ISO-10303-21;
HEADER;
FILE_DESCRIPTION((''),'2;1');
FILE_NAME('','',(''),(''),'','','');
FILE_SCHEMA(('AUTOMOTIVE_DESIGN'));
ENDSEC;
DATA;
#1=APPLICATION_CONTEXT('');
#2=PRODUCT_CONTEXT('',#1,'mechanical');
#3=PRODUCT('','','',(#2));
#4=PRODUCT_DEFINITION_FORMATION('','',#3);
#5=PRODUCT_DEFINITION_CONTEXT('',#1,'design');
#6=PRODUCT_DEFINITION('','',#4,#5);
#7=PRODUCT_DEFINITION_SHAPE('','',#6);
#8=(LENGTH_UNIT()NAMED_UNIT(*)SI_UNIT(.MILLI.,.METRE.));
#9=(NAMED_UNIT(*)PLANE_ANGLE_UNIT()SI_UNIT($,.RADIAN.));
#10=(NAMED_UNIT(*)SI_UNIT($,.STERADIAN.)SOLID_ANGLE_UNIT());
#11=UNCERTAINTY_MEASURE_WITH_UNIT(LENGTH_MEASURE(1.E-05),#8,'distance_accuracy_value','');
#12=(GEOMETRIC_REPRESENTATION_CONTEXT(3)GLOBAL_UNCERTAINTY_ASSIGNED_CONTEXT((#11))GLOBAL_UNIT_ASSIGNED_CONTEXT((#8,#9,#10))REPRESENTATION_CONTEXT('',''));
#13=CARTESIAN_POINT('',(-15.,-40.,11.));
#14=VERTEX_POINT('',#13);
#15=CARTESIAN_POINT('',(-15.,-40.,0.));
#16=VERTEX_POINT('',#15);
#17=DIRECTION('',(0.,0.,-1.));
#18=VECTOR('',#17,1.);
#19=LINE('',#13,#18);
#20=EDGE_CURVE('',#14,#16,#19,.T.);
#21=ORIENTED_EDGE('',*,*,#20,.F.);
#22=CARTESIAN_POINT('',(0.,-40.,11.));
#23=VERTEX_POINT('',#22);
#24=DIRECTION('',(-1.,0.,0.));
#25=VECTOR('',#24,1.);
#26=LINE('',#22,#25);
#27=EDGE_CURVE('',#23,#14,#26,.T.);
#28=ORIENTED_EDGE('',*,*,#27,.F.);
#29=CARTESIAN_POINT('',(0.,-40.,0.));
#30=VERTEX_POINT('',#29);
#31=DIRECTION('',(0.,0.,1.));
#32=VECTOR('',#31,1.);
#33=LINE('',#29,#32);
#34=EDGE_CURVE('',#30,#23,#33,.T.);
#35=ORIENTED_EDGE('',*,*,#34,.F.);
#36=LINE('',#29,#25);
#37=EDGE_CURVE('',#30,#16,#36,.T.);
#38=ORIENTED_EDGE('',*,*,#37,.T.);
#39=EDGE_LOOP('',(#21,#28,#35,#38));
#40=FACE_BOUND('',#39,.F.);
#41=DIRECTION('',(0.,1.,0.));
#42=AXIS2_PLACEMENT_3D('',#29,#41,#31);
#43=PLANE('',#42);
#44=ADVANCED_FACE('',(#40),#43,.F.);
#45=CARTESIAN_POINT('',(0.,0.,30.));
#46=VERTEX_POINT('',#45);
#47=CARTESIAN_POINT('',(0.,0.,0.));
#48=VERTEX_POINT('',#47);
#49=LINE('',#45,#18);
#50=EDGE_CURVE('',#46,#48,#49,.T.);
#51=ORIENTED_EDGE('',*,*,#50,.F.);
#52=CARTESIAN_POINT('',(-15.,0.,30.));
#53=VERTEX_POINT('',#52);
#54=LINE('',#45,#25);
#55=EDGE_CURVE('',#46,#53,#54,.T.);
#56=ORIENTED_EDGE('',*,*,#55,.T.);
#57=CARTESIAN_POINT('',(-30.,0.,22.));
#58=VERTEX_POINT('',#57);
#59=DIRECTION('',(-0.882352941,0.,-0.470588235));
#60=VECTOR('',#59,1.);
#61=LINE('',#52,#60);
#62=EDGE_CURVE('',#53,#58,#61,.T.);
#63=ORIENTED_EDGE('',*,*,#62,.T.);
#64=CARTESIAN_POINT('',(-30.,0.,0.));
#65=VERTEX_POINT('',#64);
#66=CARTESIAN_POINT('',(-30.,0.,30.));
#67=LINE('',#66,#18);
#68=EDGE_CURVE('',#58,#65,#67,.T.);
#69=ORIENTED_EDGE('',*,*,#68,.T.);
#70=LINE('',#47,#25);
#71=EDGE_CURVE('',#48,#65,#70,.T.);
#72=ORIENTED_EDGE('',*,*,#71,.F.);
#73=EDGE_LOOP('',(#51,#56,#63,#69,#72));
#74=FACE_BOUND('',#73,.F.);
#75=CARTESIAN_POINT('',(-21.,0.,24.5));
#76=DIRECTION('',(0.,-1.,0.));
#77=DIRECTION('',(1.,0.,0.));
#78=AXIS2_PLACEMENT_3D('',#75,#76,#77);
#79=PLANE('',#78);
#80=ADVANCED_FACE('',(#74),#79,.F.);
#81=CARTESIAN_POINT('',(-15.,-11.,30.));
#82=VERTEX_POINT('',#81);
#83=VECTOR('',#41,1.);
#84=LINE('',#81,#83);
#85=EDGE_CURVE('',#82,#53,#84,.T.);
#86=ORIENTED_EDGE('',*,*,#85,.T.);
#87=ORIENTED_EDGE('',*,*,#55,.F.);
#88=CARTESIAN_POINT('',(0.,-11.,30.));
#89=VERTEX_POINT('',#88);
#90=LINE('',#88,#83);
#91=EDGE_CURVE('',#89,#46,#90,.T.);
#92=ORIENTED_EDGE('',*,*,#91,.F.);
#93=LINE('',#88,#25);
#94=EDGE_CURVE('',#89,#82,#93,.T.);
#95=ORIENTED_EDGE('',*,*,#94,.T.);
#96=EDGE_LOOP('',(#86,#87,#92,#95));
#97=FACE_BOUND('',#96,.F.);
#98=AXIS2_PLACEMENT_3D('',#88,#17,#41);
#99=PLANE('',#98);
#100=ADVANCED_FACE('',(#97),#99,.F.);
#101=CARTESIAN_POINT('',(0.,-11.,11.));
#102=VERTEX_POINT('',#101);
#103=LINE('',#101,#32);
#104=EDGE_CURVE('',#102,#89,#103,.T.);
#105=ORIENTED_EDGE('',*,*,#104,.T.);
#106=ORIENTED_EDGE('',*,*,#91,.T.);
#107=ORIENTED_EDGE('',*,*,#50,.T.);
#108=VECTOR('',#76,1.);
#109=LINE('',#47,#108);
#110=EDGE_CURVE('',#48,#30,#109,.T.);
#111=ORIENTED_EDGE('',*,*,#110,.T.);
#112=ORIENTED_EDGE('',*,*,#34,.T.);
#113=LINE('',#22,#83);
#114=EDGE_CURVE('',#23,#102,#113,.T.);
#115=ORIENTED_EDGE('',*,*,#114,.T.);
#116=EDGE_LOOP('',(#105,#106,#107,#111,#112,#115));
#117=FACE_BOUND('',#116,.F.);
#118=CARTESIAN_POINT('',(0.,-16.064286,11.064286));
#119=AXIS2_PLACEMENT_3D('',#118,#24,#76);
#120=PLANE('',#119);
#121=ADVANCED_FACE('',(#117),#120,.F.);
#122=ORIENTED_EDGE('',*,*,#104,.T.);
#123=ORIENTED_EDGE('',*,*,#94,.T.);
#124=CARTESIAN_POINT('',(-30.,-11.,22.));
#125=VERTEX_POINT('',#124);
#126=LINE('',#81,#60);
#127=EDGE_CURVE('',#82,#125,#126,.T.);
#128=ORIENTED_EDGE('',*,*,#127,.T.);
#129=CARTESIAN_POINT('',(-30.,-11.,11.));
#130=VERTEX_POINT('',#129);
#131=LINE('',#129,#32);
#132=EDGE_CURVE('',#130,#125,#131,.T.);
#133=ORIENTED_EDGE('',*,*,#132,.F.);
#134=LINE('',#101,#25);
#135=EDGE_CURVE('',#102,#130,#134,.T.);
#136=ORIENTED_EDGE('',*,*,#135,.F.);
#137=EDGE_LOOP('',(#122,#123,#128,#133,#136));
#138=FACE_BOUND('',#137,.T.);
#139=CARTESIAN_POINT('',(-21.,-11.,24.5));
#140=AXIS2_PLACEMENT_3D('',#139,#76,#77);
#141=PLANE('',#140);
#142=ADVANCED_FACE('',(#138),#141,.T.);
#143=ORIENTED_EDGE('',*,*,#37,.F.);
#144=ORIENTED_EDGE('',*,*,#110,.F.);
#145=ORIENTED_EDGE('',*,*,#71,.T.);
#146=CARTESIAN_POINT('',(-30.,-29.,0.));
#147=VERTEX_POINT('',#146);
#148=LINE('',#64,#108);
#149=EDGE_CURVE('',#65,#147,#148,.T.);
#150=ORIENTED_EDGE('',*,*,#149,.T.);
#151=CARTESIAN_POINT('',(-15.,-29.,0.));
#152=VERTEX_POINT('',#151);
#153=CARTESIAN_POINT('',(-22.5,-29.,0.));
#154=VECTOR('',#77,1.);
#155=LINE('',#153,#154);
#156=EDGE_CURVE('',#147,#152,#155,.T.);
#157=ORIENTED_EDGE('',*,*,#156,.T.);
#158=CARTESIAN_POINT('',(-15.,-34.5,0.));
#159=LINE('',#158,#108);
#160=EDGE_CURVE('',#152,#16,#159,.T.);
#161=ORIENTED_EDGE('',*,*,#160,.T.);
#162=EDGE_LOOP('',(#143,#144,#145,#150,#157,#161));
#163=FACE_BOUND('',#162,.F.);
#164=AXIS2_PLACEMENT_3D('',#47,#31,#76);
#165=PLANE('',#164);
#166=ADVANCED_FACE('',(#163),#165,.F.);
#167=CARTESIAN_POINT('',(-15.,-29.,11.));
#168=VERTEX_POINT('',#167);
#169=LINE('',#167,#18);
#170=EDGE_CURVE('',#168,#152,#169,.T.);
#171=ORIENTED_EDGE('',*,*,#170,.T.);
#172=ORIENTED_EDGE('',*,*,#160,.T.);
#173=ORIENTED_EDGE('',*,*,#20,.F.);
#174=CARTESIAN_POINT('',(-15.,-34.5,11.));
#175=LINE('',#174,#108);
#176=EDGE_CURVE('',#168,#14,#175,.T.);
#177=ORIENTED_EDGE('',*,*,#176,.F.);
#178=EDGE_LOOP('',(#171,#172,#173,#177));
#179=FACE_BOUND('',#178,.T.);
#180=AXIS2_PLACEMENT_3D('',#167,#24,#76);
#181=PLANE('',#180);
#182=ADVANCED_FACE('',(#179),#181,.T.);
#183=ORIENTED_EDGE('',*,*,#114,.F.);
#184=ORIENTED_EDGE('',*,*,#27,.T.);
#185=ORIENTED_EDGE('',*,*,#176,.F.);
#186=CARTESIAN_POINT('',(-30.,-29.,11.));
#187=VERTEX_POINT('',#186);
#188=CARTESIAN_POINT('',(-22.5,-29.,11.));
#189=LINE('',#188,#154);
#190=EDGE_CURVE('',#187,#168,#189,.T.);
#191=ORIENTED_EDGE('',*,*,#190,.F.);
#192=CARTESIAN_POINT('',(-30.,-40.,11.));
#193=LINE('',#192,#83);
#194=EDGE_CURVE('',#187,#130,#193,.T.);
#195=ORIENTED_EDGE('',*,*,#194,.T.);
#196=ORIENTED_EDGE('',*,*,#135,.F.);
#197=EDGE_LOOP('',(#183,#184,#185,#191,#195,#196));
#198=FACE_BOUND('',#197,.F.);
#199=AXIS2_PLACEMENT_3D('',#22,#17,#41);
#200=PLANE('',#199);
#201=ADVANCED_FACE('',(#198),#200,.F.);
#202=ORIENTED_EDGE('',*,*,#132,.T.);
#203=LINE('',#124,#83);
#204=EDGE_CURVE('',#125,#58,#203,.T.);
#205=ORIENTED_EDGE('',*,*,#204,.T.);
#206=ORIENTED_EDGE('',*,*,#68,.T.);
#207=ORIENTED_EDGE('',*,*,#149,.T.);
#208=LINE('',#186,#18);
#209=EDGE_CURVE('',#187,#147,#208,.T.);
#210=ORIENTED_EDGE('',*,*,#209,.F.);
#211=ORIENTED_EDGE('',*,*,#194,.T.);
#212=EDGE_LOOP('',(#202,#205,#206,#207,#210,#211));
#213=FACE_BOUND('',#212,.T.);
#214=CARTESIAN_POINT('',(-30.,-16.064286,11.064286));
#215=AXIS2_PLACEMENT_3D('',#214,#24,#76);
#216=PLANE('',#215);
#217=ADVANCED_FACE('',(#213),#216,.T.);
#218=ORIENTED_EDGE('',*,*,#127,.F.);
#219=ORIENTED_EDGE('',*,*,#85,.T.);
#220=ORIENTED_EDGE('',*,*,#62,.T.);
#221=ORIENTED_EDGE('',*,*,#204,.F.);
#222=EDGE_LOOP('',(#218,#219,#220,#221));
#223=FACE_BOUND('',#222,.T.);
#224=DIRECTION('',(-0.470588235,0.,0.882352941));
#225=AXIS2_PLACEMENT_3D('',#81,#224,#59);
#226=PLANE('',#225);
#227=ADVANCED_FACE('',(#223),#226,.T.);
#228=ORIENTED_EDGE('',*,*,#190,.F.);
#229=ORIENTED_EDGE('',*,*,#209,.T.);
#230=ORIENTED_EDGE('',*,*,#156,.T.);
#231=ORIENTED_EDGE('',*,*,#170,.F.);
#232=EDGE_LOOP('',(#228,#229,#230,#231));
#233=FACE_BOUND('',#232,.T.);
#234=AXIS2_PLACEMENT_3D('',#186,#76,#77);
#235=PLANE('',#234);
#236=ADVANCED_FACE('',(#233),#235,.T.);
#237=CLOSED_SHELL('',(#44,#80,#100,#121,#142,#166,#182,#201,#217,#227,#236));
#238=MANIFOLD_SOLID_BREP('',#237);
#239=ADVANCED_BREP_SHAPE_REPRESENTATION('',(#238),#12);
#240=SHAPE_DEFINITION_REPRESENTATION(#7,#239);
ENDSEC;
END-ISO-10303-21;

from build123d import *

# Parameters (mm, degrees)
F1_DEPTH = 30
F2_W     = 11
F2_H     = 15
F3_DEPTH = 11
F4_W     = 15
F4_H     = 8
F5_DEPTH = 11
F6_ANGLE = -90
F8_DEPTH = 11


with BuildPart() as f1:
    # F0 (on Front) → F1 (new body)
    with BuildSketch(Plane.XZ):
        Polygon((0, 30), (0, 0), (40, 0), (40, 11), (11, 11), (11, 30), align=None)
    extrude(amount=F1_DEPTH)

    # F2 (on face) → F3 (cut, through all)
    with BuildSketch(Plane.XY.offset(11)):
        with Locations((34.5, -22.5)):
            Rectangle(F2_W, F2_H)
    extrude(amount=-F3_DEPTH, mode=Mode.SUBTRACT)

    # F4 (on face) → F5 (cut, through all)
    with BuildSketch(Plane.YZ.offset(11)):
        with Locations((-22.5, 26)):
            Rectangle(F4_W, F4_H)
    extrude(amount=-F5_DEPTH, mode=Mode.SUBTRACT)


with BuildPart() as f1_1:
    # F6: moved
    add(f1.part.rotate(Axis((0, 0, 15), (0, 0, 1)), F6_ANGLE))

    # F7 (on face) → F8 (join, through all)
    with BuildSketch(Plane.XZ.offset(11)):
        Polygon((-15, 22), (-15, 30), (-30, 22), align=None)
    extrude(amount=-F8_DEPTH)


solid = f1_1.part
